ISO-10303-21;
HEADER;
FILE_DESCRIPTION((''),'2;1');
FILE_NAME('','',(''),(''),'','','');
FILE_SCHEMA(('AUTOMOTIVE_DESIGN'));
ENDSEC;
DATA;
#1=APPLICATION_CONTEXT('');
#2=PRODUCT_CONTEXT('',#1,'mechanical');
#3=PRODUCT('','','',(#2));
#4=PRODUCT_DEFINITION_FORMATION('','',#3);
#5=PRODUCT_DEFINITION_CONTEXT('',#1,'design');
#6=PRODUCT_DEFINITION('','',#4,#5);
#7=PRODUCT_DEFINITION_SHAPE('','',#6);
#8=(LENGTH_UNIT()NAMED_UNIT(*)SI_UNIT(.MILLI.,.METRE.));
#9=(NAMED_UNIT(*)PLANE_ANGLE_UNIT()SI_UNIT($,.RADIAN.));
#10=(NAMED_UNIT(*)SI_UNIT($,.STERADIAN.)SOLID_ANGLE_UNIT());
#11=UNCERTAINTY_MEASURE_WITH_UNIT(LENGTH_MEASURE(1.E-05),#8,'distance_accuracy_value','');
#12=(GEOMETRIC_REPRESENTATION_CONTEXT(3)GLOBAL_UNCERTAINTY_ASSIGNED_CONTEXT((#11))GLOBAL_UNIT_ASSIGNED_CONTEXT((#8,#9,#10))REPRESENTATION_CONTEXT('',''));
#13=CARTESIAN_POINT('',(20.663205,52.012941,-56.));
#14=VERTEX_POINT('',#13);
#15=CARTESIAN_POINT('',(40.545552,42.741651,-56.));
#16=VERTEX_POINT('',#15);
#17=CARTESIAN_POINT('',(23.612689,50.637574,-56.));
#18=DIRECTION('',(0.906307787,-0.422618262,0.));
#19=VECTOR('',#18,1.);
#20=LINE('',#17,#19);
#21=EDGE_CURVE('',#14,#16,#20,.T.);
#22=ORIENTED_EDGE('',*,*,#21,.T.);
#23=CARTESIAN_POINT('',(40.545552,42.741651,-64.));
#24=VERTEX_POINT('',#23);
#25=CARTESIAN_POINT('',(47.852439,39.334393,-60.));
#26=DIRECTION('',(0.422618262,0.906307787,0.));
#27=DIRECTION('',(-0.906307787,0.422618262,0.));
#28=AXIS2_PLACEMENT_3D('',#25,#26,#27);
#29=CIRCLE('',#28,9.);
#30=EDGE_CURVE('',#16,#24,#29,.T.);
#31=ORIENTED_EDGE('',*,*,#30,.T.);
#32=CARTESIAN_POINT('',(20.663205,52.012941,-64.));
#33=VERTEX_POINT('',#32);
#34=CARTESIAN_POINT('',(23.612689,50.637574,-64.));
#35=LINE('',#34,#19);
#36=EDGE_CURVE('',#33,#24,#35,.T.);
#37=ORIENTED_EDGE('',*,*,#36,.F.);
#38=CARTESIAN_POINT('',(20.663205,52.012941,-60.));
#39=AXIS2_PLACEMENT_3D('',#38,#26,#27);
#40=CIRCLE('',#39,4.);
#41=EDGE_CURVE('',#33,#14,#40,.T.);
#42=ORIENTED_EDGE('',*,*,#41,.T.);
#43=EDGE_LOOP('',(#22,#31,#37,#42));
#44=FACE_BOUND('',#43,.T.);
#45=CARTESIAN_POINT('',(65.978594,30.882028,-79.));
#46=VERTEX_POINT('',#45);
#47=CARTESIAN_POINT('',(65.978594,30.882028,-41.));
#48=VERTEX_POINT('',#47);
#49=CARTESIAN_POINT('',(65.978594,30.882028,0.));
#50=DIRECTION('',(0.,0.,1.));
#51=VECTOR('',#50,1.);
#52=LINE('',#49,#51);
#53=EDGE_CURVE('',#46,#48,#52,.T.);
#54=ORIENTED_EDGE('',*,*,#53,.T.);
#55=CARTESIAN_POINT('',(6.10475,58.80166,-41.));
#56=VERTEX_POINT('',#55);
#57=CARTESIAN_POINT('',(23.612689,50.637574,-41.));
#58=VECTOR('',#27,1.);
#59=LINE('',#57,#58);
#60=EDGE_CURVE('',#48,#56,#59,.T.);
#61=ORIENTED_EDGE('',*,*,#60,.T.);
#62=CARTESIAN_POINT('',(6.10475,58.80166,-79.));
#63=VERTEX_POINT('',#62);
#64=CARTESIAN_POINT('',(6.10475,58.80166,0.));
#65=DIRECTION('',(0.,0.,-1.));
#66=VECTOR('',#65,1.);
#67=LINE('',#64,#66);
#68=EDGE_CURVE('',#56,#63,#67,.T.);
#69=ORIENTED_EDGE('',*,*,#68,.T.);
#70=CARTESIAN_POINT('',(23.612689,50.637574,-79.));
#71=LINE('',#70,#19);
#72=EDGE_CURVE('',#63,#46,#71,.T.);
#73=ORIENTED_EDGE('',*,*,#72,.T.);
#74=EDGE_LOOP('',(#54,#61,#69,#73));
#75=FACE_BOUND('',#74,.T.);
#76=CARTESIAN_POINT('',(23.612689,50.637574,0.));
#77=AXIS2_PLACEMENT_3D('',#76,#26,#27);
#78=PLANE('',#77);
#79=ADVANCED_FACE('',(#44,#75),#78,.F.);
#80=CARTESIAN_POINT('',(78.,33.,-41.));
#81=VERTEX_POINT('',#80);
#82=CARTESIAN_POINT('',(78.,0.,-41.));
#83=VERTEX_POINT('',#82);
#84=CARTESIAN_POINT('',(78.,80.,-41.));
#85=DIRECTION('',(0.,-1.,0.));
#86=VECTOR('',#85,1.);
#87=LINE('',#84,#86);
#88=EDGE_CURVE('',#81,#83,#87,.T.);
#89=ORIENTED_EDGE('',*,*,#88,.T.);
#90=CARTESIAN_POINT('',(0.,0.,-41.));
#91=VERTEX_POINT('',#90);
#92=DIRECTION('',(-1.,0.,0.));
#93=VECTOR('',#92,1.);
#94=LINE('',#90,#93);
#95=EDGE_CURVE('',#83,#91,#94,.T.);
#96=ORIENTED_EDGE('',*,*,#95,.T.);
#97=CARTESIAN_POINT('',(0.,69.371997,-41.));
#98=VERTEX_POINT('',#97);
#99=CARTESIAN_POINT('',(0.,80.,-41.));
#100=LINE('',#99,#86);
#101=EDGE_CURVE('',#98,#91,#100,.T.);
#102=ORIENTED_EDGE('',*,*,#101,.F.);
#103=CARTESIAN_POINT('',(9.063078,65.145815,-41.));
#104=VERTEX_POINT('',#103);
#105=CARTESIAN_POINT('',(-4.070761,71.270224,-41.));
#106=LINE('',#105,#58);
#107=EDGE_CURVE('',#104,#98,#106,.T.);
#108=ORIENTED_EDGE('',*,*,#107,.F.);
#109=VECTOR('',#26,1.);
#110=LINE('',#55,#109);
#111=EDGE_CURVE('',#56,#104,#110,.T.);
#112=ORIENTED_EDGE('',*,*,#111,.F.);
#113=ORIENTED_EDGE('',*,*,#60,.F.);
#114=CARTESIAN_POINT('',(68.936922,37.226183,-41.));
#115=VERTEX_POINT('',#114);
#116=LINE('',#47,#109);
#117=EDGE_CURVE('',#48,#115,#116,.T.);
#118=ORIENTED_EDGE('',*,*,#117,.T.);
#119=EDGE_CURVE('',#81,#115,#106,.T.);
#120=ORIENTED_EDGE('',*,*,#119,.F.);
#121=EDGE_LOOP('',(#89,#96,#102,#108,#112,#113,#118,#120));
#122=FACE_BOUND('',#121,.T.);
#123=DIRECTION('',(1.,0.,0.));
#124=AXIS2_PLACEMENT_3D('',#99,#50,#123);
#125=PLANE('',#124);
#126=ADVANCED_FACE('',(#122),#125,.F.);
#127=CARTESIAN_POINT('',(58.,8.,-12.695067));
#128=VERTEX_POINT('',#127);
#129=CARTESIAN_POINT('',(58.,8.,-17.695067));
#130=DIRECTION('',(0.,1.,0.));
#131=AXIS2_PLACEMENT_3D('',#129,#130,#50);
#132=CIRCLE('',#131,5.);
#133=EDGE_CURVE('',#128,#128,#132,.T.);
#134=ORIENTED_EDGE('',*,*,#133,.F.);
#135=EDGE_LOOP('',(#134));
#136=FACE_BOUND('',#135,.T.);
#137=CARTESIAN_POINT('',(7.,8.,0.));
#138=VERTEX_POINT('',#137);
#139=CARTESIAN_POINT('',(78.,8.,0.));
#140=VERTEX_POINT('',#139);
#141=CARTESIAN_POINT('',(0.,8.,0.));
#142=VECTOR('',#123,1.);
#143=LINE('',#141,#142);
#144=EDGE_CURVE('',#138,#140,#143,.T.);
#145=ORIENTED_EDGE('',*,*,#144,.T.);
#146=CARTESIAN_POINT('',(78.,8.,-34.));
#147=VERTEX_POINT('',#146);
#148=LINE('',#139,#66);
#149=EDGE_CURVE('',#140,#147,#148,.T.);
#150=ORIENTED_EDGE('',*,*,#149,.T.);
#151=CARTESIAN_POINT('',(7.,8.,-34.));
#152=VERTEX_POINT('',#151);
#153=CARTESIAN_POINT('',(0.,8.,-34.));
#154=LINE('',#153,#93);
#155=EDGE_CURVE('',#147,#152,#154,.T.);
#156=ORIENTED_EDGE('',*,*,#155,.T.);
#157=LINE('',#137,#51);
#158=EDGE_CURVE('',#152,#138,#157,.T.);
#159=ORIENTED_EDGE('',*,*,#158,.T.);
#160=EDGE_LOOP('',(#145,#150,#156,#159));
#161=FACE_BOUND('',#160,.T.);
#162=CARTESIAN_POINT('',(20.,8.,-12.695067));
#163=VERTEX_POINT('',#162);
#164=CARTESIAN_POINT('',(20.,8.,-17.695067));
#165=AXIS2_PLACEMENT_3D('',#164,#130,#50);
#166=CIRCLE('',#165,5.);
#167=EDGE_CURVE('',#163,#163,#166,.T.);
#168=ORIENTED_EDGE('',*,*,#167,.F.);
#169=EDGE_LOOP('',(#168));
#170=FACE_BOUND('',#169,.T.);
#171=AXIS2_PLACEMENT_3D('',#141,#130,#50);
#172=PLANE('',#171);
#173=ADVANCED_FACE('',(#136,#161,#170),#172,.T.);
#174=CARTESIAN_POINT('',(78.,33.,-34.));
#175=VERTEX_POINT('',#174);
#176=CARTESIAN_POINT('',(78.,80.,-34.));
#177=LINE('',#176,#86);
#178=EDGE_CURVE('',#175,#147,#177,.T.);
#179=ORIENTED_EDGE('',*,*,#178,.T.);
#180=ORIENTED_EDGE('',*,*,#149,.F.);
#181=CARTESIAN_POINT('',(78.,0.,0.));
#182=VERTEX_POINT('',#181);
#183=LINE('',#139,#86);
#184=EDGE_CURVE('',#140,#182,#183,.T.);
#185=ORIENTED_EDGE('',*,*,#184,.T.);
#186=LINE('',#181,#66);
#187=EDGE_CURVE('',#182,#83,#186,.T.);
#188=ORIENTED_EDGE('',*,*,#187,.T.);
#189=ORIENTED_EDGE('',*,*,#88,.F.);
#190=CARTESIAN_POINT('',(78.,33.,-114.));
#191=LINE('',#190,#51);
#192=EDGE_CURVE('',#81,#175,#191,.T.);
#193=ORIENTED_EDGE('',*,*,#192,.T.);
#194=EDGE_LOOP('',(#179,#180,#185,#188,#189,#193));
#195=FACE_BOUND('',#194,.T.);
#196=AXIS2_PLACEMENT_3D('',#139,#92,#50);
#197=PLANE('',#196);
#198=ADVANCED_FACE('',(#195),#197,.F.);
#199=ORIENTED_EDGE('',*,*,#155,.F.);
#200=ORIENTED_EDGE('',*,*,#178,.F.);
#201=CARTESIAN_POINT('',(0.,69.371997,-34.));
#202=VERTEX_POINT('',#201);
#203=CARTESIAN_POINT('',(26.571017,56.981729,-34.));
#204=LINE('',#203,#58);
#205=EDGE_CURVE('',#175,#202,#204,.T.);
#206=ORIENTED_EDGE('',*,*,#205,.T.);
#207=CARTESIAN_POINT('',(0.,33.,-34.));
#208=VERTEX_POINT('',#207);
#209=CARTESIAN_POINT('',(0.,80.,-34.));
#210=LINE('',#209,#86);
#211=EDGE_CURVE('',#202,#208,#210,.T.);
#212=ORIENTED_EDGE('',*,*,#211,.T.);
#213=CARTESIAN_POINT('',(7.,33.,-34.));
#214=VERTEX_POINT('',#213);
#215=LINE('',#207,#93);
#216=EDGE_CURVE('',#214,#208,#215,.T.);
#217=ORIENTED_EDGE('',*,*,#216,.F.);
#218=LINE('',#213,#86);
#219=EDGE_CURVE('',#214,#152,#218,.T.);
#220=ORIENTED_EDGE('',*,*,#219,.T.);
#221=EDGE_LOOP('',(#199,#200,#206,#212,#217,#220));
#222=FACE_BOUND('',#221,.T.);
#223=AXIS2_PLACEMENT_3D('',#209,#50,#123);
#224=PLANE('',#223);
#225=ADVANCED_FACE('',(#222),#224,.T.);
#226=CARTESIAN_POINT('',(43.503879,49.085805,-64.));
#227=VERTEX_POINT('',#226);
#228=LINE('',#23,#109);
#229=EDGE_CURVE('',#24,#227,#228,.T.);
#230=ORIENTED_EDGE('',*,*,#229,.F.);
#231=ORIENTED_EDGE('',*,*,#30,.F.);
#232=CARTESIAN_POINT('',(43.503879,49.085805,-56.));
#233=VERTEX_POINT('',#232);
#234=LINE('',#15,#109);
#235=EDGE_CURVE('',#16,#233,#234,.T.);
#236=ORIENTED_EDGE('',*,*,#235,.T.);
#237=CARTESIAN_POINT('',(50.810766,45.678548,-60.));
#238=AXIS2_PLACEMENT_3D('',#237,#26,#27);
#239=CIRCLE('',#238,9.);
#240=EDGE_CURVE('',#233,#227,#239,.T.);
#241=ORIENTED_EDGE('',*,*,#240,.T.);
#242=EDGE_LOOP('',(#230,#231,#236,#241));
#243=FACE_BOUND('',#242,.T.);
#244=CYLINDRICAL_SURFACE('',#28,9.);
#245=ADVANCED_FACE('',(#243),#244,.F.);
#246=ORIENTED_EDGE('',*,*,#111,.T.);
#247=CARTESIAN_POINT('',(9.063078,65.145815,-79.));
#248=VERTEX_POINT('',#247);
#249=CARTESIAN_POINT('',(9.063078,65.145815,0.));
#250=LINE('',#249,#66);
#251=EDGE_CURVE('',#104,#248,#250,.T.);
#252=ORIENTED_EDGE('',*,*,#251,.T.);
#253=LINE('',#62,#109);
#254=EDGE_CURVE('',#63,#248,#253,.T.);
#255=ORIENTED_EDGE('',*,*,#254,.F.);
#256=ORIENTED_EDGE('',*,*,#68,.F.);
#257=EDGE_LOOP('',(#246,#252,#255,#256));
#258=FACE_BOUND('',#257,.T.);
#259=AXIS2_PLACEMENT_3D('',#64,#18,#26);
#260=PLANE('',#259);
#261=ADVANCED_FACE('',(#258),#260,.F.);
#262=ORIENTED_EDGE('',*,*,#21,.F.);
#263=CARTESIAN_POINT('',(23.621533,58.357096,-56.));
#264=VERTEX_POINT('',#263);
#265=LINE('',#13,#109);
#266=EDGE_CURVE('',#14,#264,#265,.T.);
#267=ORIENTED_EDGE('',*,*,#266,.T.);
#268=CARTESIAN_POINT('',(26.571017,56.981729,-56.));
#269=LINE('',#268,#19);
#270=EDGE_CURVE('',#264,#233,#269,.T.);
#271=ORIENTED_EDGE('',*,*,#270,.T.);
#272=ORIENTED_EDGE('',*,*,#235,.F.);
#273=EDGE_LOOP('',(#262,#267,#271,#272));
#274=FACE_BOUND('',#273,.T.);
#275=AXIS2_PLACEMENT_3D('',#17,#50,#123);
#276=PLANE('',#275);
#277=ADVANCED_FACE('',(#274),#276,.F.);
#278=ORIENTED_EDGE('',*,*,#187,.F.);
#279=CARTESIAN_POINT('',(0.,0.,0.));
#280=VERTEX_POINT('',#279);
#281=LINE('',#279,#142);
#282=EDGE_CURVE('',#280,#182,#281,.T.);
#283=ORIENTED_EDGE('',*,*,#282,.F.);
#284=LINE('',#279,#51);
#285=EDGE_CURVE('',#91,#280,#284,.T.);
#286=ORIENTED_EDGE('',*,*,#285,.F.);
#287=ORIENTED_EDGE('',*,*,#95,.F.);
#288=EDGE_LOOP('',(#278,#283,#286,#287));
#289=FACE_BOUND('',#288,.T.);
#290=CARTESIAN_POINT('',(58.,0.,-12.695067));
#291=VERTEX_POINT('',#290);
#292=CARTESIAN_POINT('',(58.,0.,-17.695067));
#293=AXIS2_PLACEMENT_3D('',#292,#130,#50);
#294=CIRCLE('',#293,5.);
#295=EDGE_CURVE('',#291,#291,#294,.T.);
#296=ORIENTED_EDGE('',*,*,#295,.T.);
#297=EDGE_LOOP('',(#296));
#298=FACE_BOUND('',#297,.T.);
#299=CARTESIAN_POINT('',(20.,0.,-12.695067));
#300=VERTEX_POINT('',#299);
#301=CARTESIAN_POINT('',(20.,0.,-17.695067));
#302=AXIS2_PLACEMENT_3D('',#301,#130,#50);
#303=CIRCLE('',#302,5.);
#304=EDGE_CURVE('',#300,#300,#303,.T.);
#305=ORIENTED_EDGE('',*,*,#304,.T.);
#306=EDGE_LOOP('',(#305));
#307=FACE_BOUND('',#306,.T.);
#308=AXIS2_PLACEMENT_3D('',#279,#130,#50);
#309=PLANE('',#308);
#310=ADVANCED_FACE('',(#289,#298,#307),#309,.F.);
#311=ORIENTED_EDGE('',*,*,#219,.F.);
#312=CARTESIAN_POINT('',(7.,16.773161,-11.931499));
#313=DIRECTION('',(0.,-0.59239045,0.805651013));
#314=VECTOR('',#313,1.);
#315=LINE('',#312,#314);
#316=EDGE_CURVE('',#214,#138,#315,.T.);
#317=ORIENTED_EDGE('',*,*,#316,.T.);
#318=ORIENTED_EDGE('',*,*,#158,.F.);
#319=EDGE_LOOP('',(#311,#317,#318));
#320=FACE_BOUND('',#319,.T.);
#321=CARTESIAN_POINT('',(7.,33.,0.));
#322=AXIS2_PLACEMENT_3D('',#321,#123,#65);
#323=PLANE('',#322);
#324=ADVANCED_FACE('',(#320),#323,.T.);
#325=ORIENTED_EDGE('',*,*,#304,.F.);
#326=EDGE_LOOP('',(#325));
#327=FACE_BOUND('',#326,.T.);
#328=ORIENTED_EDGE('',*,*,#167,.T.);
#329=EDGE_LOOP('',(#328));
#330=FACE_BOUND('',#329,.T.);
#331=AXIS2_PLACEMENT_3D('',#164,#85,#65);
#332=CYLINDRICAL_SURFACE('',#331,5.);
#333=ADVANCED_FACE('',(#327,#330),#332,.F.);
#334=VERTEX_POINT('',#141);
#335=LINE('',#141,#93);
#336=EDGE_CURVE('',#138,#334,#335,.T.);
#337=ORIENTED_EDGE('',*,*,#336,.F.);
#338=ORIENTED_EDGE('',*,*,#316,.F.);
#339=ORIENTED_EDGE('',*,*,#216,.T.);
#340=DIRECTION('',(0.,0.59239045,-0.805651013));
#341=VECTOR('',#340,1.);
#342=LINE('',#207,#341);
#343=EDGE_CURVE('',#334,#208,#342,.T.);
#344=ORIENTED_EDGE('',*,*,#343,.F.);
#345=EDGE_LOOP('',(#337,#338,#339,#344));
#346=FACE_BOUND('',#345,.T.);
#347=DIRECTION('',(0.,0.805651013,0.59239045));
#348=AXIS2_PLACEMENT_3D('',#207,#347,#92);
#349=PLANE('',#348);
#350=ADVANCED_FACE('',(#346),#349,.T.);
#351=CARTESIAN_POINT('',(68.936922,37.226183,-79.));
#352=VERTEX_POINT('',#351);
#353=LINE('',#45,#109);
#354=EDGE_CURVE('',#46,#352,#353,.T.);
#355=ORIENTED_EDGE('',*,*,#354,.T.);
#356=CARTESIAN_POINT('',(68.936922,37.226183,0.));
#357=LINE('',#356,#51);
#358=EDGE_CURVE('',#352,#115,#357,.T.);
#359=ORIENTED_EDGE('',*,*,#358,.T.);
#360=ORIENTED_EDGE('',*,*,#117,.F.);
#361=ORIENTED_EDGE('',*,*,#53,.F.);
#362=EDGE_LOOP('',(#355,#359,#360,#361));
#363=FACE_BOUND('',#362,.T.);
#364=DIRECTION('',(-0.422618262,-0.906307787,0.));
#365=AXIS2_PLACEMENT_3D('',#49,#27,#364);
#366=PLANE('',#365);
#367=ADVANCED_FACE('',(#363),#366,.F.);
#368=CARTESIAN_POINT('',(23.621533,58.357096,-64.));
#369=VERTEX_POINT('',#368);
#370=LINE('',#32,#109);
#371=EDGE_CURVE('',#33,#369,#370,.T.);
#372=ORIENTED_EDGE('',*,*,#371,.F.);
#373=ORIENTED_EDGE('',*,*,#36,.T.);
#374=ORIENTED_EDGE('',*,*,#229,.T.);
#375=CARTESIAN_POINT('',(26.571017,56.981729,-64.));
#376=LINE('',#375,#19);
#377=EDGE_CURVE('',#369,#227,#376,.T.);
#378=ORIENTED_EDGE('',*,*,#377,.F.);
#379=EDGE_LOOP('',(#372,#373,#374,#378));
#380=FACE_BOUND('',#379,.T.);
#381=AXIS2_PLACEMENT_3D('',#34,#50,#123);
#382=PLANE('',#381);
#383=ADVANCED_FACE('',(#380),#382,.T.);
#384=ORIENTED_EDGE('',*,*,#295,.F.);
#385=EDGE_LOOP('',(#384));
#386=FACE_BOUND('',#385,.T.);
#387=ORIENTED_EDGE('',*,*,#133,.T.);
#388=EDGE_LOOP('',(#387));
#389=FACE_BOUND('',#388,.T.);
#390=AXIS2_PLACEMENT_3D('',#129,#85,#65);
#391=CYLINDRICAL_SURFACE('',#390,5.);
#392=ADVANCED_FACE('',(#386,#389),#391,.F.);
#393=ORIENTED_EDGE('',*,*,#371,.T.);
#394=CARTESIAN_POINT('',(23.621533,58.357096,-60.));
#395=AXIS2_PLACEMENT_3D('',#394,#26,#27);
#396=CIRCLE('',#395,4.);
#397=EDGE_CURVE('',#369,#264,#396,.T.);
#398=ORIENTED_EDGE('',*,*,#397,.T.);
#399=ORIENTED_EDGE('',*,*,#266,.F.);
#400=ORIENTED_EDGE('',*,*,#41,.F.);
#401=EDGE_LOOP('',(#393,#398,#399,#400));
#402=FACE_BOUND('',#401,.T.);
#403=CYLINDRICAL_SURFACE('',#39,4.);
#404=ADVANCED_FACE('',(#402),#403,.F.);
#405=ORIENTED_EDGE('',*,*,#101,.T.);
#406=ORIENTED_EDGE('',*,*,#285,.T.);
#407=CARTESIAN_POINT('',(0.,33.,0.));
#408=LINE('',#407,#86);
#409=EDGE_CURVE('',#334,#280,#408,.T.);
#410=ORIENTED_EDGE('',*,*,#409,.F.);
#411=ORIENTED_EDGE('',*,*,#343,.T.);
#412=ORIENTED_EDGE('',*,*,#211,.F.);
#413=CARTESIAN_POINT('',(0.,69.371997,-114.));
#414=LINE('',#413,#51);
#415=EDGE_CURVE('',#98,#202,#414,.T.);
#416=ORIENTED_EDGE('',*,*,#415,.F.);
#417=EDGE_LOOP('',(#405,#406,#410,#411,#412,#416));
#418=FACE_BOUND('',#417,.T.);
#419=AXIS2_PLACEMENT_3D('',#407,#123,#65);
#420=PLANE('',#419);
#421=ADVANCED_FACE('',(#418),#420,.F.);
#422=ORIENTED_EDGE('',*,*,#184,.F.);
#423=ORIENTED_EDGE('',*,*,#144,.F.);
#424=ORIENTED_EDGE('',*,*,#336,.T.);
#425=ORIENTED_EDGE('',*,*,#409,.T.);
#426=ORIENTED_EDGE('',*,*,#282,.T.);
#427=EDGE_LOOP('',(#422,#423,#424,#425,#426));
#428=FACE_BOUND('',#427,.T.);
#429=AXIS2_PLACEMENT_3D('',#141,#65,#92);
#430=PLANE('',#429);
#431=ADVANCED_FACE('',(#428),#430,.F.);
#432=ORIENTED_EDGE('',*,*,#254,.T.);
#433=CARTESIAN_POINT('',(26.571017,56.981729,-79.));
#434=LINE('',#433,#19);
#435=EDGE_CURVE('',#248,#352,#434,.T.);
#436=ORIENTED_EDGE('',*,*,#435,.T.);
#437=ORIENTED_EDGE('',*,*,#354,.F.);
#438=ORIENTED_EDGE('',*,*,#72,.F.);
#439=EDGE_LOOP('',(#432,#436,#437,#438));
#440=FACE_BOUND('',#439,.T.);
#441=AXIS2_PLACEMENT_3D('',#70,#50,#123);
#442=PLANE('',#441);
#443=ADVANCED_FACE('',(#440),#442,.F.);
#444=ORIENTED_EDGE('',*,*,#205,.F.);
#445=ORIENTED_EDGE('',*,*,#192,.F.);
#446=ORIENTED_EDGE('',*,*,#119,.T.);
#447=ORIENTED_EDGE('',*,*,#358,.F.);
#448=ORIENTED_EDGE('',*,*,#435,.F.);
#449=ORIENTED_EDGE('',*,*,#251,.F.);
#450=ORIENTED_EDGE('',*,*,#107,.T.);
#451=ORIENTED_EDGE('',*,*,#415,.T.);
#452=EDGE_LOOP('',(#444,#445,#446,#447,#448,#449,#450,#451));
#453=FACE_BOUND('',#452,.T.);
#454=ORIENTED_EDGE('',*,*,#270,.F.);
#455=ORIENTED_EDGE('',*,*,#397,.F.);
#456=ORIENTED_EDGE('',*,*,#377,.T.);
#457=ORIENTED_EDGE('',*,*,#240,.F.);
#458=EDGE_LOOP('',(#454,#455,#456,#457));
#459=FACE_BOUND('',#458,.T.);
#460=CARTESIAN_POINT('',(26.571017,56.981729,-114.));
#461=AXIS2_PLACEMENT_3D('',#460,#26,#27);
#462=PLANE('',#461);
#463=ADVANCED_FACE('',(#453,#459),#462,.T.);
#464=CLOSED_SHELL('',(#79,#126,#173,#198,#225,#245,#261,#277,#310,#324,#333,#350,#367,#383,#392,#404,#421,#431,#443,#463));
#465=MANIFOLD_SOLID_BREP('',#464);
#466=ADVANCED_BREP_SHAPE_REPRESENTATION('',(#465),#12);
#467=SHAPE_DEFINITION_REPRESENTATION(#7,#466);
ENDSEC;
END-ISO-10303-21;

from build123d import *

# Parameters (mm, degrees)
SKETCH1_W           = 71
SKETCH1_H           = 34
SKETCH1_R           = 5
BOSS_EXTRUDE1_DEPTH = 8
SKETCH1_3_W         = 7
SKETCH1_3_H         = 34
BOSS_EXTRUDE2_DEPTH = 33
BOSS_EXTRUDE3_DEPTH = 80
CUT_EXTRUDE1_DEPTH  = 80
BOSS_EXTRUDE4_DEPTH = 7
CHAMFER1_SIZE2      = 34
CHAMFER1_SIZE       = 25


with BuildPart() as part:
    # Sketch1 → Boss-Extrude1 (new body)
    with BuildSketch(Plane(origin=(0, 0, 0), x_dir=(1, 0, 0), z_dir=(0, 1, 0))):
        with Locations((42.5, 17)):
            Rectangle(SKETCH1_W, SKETCH1_H)
        with Locations(Location((20, 17.695066584, 0), (0, 0, 270))):
            Circle(SKETCH1_R, mode=Mode.SUBTRACT)
        with Locations(Location((58, 17.695066584, 0), (0, 0, 270))):
            Circle(SKETCH1_R, mode=Mode.SUBTRACT)
    extrude(amount=BOSS_EXTRUDE1_DEPTH)

    # Sketch1<3> → Boss-Extrude2 (add)
    with BuildSketch(Plane(origin=(0, 0, 0), x_dir=(1, 0, 0), z_dir=(0, 1, 0))):
        with Locations((3.5, 17)):
            Rectangle(SKETCH1_3_W, SKETCH1_3_H)
    extrude(amount=BOSS_EXTRUDE2_DEPTH)

    # Sketch1<4> → Boss-Extrude3 (add)
    with BuildSketch(Plane(origin=(0, 0, 0), x_dir=(1, 0, 0), z_dir=(0, 1, 0))):
        Polygon((0, 41), (0, 34), (7, 34), (78, 34), (78, 41), align=None)
    extrude(amount=BOSS_EXTRUDE3_DEPTH)

    # Sketch2 → Cut-Extrude1 (cut)
    with BuildSketch(Plane.XY.offset(-34)):
        Polygon((0, 69.371997336), (78, 33), (78, 80), (0, 80), align=None)
    extrude(amount=-CUT_EXTRUDE1_DEPTH, mode=Mode.SUBTRACT)

    # Sketch3 → Boss-Extrude4 (add)
    with BuildSketch(Plane(origin=(26.571016534, 56.981728841, 0), x_dir=(0.9063077870366528, -0.42261826174069356, 0), z_dir=(0.42261826174069356, 0.9063077870366528, 0))):
        with BuildLine():
            Line((-19.317872928, 79), (-19.317872928, 60))
            Line((-19.317872928, 60), (-7.254395249, 60))
            ThreePointArc((-7.254395249, 60), (-6.082822373, 62.828427125), (-3.254395249, 64))
            Line((-3.254395249, 64), (18.683347003, 64))
            ThreePointArc((18.683347003, 64), (28.799829698, 68.762428879), (35.745604751, 60))
            Line((35.745604751, 60), (46.745604751, 60))
            Line((46.745604751, 60), (46.745604751, 79))
            Line((46.745604751, 79), (-19.317872928, 79))
        make_face()
        with BuildLine():
            Line((-19.317872928, 60), (-19.317872928, 41))
            Line((-19.317872928, 41), (46.745604751, 41))
            Line((46.745604751, 41), (46.745604751, 60))
            Line((46.745604751, 60), (35.745604751, 60))
            ThreePointArc((35.745604751, 60), (28.799829698, 51.237571121), (18.683347003, 56))
            Line((18.683347003, 56), (-3.254395249, 56))
            ThreePointArc((-3.254395249, 56), (-6.082822373, 57.171572875), (-7.254395249, 60))
            Line((-7.254395249, 60), (-19.317872928, 60))
        make_face()
    extrude(amount=-BOSS_EXTRUDE4_DEPTH)

    # Chamfer1
    chamfer1_edges = [part.edges().sort_by_distance(p)[0] for p in [
        (3.5, 33, 0),
    ]]
    chamfer1_side = [part.faces().sort_by_distance(p)[0] for p in [
        (3.5, 32.5, 0),
    ]]
    chamfer(chamfer1_edges, length=CHAMFER1_SIZE - 0.0001, length2=CHAMFER1_SIZE2 - 0.0001, reference=chamfer1_side[0])  # a hair under: the kernel refuses the full size


solid = part.part
